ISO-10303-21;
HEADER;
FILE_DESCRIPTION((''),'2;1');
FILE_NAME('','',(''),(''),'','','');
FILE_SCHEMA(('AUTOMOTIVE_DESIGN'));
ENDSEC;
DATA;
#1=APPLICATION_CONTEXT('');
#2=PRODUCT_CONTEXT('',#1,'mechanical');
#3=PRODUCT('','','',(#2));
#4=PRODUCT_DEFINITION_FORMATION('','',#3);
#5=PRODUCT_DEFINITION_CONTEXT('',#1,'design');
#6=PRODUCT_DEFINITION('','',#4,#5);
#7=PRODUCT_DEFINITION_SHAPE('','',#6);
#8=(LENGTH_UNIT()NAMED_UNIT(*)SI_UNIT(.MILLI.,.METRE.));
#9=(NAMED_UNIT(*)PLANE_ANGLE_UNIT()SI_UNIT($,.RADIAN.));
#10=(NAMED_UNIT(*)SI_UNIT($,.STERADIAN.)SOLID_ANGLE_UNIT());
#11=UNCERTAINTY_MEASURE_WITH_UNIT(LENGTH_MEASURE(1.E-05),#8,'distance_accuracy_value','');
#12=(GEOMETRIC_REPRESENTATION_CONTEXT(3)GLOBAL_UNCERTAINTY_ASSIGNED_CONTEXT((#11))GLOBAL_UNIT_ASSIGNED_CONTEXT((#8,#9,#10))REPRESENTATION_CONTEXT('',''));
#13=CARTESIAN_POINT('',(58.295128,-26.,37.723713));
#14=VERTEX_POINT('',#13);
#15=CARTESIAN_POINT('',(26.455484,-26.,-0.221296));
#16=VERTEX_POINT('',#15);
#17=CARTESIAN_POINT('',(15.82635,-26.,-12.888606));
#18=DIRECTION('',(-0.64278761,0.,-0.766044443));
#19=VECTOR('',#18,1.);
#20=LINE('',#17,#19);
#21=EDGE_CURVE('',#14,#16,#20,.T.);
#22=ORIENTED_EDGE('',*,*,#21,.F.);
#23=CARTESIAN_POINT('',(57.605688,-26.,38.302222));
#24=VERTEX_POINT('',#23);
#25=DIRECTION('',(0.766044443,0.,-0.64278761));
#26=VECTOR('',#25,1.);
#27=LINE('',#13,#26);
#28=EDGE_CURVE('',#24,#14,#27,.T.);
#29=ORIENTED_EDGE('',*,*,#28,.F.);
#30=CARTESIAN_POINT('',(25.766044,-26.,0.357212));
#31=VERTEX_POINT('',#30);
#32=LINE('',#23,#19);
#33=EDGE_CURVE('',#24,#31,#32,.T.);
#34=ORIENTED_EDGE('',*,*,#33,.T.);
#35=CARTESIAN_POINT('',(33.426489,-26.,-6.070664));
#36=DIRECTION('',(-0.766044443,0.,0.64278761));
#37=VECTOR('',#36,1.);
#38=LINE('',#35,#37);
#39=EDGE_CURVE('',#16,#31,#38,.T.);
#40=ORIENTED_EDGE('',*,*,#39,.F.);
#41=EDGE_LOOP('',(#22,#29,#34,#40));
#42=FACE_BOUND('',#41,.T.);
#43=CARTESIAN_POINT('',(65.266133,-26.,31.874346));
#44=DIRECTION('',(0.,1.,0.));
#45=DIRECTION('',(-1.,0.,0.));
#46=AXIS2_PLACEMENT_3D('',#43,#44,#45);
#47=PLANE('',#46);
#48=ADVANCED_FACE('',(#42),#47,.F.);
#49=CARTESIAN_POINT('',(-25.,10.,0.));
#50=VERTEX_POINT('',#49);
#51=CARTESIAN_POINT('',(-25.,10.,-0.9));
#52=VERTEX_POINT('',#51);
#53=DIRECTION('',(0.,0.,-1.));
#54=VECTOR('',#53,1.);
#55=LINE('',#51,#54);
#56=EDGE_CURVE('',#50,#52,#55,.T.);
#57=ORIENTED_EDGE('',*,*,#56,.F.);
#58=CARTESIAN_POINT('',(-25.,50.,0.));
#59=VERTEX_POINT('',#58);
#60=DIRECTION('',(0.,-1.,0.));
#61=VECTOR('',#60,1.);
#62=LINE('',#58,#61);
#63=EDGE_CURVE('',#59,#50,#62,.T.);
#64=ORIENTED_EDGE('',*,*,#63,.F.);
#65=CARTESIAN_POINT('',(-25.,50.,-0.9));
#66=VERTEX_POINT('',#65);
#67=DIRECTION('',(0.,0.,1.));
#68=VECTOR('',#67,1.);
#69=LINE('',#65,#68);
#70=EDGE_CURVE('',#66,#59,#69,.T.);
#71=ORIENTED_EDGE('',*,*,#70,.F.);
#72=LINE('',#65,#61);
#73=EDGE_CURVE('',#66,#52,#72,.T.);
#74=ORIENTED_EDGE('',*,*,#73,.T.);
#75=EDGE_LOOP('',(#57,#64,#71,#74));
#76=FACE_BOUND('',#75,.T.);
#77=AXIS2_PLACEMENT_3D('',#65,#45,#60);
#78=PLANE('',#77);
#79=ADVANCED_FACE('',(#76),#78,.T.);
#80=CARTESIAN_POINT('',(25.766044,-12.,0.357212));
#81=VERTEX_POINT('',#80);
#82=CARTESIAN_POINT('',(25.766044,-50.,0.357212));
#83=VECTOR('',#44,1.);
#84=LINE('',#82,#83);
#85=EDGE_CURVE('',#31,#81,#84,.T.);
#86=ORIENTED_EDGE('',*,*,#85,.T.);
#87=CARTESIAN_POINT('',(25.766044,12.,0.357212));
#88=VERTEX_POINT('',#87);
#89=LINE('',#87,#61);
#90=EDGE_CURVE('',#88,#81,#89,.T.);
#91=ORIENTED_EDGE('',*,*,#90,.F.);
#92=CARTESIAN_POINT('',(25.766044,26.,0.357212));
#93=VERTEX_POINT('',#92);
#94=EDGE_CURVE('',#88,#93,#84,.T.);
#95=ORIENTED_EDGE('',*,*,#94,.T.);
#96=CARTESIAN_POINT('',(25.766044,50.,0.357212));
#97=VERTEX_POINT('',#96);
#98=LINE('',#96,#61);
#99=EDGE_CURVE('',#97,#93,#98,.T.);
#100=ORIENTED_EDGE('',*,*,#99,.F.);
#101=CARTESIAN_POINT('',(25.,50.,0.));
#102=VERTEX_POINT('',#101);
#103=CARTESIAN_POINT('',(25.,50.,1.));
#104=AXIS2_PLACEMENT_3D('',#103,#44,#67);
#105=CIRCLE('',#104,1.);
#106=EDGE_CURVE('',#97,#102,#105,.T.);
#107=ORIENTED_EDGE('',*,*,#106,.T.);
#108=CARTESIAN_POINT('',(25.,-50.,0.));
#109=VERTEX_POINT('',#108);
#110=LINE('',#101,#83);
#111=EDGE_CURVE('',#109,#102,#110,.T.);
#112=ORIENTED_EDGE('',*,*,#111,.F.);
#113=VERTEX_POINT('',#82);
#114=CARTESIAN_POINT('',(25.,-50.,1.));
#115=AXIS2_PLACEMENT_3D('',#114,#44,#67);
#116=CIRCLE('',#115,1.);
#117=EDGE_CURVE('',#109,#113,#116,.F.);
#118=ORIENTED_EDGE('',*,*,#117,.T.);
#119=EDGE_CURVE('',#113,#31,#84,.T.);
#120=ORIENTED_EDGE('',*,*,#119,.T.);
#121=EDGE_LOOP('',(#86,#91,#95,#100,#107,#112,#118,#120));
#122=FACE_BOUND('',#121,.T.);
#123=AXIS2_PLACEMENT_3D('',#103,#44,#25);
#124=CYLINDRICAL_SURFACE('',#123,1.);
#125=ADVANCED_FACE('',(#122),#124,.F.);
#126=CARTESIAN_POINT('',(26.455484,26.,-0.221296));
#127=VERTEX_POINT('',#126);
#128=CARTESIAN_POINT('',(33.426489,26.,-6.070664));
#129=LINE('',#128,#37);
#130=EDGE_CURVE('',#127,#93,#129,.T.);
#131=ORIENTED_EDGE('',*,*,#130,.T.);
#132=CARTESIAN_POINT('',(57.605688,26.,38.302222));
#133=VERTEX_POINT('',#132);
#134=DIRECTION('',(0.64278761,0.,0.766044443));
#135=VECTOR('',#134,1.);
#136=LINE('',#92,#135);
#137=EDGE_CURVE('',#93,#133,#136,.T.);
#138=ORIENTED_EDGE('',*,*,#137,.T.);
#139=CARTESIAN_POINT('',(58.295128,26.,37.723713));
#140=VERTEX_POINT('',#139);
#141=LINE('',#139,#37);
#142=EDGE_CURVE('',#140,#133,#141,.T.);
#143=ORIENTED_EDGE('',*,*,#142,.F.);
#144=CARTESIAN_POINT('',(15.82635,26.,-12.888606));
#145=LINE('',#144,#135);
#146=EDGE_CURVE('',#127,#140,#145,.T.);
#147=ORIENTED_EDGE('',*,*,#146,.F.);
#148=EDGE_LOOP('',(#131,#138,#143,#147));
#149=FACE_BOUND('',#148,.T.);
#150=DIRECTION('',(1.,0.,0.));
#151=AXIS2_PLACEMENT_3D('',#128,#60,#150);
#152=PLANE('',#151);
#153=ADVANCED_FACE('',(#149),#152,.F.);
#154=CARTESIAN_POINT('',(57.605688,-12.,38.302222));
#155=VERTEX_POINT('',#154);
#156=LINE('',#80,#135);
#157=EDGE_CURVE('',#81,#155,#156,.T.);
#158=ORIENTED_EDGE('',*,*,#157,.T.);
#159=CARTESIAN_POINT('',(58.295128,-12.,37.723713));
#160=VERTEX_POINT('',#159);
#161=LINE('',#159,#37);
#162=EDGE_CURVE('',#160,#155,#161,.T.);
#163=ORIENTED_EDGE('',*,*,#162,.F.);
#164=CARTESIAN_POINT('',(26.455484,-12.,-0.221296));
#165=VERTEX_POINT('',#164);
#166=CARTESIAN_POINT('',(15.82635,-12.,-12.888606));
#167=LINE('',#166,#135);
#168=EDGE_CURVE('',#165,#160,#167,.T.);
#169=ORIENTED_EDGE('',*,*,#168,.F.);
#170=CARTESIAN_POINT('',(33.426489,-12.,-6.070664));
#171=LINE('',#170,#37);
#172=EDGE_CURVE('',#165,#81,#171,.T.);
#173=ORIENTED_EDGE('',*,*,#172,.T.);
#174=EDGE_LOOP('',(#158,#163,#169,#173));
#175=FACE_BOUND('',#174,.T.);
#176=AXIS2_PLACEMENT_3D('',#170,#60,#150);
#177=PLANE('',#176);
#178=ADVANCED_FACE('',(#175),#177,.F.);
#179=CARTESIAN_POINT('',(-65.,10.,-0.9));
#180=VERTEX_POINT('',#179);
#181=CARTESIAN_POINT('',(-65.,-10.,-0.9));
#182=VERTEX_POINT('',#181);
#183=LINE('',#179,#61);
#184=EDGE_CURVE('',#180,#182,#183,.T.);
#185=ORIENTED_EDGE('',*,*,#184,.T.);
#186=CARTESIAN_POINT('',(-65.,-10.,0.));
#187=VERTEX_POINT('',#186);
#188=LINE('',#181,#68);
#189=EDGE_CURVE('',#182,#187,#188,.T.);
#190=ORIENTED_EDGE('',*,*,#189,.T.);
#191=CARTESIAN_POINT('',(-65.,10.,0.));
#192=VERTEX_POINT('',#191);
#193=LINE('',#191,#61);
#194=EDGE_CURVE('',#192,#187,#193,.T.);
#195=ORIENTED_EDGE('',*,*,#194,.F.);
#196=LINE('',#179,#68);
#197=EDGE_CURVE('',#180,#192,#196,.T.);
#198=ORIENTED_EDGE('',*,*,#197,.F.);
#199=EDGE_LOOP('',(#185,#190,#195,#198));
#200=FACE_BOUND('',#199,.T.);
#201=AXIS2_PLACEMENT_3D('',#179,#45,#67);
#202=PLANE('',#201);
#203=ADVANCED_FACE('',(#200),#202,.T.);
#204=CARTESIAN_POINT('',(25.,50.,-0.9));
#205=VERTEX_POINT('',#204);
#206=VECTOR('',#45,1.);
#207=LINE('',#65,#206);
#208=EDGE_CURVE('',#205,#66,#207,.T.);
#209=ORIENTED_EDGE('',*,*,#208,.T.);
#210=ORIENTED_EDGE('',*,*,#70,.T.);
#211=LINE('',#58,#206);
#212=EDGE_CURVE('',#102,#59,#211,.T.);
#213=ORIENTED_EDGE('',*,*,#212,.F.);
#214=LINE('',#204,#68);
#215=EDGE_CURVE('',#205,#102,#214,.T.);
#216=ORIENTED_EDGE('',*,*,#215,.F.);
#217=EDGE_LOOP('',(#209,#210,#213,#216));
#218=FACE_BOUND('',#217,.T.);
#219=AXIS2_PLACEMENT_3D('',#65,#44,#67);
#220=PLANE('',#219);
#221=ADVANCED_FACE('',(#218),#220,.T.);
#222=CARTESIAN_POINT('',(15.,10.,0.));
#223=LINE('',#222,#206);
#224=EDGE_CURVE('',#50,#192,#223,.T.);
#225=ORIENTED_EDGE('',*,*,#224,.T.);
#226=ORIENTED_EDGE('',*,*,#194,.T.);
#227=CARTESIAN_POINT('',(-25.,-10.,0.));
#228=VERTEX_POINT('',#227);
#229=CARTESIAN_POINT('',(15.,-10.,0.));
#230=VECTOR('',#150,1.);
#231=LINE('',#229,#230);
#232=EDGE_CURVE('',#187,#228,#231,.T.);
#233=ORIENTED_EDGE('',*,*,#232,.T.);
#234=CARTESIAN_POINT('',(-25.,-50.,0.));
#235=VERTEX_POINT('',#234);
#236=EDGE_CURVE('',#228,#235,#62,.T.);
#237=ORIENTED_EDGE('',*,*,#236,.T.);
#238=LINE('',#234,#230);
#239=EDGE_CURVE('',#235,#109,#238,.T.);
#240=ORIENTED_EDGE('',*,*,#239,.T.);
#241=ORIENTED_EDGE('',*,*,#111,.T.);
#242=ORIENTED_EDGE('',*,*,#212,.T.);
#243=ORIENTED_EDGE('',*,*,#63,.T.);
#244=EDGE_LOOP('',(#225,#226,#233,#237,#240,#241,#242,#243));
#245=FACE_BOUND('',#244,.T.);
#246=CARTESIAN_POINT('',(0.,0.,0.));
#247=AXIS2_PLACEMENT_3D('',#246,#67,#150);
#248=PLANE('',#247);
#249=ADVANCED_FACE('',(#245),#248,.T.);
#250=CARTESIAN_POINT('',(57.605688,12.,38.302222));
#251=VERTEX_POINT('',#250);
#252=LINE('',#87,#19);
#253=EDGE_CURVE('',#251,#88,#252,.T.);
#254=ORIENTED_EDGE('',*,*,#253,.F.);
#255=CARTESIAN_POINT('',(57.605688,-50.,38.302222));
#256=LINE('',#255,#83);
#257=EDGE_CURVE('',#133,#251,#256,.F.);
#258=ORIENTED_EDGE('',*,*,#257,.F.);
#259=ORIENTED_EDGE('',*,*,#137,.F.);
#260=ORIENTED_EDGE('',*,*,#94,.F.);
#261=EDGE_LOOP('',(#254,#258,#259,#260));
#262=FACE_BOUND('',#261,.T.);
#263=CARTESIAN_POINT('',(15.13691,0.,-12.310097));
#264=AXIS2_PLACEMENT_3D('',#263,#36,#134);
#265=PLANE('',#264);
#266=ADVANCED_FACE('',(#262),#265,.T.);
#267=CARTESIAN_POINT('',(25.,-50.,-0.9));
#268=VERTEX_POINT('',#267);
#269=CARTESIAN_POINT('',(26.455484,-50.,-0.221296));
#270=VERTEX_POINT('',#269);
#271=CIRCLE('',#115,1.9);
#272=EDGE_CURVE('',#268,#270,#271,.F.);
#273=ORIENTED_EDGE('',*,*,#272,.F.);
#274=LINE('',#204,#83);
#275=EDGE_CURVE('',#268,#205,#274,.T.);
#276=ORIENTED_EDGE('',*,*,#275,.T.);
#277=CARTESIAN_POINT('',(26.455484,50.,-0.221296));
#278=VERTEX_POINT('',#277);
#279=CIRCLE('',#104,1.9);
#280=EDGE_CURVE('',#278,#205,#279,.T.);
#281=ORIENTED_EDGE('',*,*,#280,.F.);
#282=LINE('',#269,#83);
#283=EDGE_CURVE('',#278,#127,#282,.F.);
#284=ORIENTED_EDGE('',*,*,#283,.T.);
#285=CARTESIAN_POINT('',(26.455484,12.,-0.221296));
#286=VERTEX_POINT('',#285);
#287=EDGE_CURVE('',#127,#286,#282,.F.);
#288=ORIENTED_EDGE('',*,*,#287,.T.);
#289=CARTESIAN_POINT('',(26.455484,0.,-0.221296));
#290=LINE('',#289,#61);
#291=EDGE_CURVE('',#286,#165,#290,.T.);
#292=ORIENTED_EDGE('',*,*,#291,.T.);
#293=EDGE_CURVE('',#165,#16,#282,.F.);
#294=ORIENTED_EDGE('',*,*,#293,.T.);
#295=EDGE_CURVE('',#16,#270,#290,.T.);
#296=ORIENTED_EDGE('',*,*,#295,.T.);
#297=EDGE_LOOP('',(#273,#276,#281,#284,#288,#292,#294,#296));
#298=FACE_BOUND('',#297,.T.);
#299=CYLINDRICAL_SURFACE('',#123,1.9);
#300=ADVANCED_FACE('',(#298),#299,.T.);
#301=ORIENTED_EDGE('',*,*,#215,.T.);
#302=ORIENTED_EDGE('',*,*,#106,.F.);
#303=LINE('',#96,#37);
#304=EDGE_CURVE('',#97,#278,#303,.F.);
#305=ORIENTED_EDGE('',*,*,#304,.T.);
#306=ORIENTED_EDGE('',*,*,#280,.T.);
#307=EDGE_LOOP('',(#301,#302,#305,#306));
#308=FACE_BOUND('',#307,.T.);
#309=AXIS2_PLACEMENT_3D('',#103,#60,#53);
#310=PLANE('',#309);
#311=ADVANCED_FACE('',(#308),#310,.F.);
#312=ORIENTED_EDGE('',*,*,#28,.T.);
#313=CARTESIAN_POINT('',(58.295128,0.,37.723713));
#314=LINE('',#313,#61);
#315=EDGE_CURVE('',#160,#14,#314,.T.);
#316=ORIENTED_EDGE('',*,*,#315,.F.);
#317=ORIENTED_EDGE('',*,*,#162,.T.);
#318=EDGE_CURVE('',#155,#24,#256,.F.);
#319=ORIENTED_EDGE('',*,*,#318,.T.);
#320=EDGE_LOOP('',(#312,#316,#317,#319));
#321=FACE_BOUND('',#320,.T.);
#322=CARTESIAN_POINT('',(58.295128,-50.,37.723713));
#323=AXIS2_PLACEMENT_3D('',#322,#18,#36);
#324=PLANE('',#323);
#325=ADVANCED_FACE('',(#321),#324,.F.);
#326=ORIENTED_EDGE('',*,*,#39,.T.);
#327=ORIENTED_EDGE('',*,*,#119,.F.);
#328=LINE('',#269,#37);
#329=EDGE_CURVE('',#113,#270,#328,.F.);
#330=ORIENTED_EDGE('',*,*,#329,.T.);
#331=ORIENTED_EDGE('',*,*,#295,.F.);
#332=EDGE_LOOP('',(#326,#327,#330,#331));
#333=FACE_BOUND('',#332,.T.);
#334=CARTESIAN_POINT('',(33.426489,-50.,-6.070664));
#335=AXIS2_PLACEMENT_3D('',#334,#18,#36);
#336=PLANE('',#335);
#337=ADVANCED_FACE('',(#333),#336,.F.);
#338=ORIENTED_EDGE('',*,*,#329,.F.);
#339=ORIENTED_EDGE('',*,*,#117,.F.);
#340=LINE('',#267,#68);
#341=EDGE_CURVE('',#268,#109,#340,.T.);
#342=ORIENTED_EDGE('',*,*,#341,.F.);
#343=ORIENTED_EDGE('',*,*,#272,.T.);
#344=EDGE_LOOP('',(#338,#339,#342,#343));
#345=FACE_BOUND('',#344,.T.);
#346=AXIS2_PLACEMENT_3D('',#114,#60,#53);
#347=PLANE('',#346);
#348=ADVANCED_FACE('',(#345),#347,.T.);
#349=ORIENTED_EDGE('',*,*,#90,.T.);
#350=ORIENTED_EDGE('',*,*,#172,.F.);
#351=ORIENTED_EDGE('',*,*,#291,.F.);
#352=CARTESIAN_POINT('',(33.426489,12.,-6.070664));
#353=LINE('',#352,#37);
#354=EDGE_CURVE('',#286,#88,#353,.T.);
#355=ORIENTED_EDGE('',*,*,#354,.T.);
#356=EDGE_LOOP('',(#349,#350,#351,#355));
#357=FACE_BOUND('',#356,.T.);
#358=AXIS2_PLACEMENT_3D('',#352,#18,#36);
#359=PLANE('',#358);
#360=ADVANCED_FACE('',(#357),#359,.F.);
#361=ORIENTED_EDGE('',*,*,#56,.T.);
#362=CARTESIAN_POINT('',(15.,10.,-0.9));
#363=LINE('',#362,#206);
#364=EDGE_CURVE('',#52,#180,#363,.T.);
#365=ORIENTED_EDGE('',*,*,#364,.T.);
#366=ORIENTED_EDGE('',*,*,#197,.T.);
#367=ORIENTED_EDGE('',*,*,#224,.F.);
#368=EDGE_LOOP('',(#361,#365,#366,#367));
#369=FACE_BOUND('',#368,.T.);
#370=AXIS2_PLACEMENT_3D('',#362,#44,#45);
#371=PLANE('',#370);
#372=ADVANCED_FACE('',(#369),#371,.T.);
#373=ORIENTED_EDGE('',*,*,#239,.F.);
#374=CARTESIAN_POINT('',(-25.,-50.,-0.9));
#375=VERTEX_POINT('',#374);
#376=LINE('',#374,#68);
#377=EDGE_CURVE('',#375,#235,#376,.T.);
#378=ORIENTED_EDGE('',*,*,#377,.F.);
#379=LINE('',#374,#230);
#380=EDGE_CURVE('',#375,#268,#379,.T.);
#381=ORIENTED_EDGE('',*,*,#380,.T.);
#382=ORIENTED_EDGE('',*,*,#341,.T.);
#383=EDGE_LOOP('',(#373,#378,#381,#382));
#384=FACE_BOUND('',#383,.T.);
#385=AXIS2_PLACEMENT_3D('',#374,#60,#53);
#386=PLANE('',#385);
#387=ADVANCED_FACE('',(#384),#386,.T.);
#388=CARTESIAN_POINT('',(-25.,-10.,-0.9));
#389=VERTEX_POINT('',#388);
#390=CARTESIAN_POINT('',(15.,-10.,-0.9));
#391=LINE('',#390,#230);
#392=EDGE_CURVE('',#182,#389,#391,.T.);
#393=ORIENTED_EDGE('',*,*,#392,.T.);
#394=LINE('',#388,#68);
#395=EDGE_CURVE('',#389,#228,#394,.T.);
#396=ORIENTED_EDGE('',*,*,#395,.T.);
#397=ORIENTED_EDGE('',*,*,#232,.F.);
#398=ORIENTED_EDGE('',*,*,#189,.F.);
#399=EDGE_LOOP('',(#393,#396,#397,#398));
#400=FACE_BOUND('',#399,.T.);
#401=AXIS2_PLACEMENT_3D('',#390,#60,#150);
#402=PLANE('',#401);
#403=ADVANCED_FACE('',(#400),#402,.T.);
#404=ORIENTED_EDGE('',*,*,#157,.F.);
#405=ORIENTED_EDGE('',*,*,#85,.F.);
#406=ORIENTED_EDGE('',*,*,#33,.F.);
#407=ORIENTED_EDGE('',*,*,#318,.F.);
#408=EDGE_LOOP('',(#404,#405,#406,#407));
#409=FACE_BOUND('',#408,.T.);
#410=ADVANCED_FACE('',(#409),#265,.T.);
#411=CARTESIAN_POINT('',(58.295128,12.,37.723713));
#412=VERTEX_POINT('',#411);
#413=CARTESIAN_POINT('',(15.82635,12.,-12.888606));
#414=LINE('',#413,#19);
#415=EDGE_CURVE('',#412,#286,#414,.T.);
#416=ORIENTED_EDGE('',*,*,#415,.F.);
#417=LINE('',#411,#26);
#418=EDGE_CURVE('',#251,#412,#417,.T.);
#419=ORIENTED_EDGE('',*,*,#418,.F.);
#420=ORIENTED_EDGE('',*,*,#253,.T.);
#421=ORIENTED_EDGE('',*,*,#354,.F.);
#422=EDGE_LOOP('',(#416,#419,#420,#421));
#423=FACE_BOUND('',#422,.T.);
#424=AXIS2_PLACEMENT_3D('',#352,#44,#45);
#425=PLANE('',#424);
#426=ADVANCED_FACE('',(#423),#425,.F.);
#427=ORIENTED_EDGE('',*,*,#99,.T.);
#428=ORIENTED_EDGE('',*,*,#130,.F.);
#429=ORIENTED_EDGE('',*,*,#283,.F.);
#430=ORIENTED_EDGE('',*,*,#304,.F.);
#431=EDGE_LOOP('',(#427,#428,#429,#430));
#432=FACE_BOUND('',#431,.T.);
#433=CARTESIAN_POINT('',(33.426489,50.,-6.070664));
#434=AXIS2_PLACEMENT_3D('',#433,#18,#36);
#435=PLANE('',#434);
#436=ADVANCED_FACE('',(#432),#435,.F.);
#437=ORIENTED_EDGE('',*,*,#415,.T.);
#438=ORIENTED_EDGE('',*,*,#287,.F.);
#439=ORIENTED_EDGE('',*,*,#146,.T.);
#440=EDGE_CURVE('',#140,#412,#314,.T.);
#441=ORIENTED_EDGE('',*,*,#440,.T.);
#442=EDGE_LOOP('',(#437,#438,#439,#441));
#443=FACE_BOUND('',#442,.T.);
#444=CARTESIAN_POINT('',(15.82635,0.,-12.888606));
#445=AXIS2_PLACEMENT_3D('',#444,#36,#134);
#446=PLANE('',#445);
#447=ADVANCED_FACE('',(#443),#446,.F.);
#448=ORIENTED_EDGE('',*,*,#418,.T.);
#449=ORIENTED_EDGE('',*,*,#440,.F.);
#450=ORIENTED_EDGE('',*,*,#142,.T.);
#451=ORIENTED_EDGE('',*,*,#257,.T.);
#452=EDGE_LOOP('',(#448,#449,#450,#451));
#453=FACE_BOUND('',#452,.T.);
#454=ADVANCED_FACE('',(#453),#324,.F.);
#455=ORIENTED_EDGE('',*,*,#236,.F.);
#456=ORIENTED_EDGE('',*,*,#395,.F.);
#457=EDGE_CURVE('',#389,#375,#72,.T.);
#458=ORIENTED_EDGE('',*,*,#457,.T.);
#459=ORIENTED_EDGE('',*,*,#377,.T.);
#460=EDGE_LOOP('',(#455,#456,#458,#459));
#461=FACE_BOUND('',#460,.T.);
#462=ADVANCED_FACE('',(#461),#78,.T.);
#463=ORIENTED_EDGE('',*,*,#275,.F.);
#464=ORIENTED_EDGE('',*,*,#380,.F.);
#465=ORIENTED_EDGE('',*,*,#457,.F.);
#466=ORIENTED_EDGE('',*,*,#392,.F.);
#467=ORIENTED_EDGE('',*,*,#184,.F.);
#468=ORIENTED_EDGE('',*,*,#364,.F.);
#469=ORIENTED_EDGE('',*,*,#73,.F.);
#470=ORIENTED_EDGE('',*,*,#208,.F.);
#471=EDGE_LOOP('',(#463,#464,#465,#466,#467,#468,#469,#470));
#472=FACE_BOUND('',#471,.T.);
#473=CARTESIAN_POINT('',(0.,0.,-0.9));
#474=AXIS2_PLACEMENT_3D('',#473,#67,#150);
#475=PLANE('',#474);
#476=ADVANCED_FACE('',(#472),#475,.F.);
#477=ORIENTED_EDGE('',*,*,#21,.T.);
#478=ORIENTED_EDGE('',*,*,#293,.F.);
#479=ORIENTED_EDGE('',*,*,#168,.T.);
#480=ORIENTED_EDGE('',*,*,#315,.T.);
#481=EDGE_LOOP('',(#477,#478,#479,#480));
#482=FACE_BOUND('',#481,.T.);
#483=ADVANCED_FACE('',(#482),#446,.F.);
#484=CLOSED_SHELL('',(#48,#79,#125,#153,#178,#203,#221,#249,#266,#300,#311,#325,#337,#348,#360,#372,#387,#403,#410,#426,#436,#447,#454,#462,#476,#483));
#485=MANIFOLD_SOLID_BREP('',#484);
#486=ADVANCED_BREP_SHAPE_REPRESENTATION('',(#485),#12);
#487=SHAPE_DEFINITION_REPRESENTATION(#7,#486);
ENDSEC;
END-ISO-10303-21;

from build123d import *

# Parameters (mm, degrees)
SKETCH2_W          = 50
SKETCH2_H          = 100
BASE_FLANGE1_DEPTH = 0.9
EDGE_FLANGE1_DEPTH = 100
SKETCH10_W         = 49.533692342
SKETCH10_H         = 24
CUT_EXTRUDE1_DEPTH = 10
SKETCH12_W         = 49.533692342
SKETCH12_H         = 24
CUT_EXTRUDE2_DEPTH = 10
SKETCH13_W         = 49.533692342
SKETCH13_H         = 24
CUT_EXTRUDE3_DEPTH = 10
SKETCH17_W         = 80
SKETCH17_H         = 20
TAB4_DEPTH         = 0.9


# Sheet-metal steps are written as plain solids
with BuildPart() as part:
    # Sketch2 → Base-Flange1 (new body)
    with BuildSketch(Plane.XY):
        Rectangle(SKETCH2_W, SKETCH2_H)
    extrude(amount=-BASE_FLANGE1_DEPTH)

    # Edge-Flange1 section (across the edge) → Edge-Flange1 (add)
    with BuildSketch(Plane(origin=(25.466307658, -50, 0), x_dir=(-0.7660444431189747, 0, 0.6427876096865435), z_dir=(0, 1, 0))):
        with BuildLine():
            Line((-0.9, 0.466307658), (-0.9, 50))
            Line((-0.9, 50), (0, 50))
            Line((0, 50), (0, 0.466307658))
            ThreePointArc((0, 0.466307658), (0.093692213, 0.043689396), (0.35721239, -0.299736785))
            Line((0.35721239, -0.299736785), (-0.221296458, -0.989176784))
            ThreePointArc((-0.221296458, -0.989176784), (-0.721984795, -0.336667039), (-0.9, 0.466307658))
        make_face()
    extrude(amount=EDGE_FLANGE1_DEPTH)

    # Sketch10 → Cut-Extrude1 (cut)
    with BuildSketch(Plane(origin=(14.944242787, 0, -12.539708611), x_dir=(0.6427876096865437, 0, 0.7660444431189746), z_dir=(-0.7660444431189746, 0, 0.6427876096865437))):
        with Locations((41.602580856, 38)):
            Rectangle(SKETCH10_W, SKETCH10_H)
    extrude(amount=-CUT_EXTRUDE1_DEPTH, mode=Mode.SUBTRACT)

    # Sketch12 → Cut-Extrude2 (cut)
    with BuildSketch(Plane(origin=(14.944242787, 0, -12.539708611), x_dir=(0.6427876096865437, 0, 0.7660444431189746), z_dir=(-0.7660444431189746, 0, 0.6427876096865437))):
        with Locations((41.602580856, 0)):
            Rectangle(SKETCH12_W, SKETCH12_H)
    extrude(amount=-CUT_EXTRUDE2_DEPTH, mode=Mode.SUBTRACT)

    # Sketch13 → Cut-Extrude3 (cut)
    with BuildSketch(Plane(origin=(14.944242787, 0, -12.539708611), x_dir=(0.6427876096865437, 0, 0.7660444431189746), z_dir=(-0.7660444431189746, 0, 0.6427876096865437))):
        with Locations((41.602580856, -38)):
            Rectangle(SKETCH13_W, SKETCH13_H)
    extrude(amount=-CUT_EXTRUDE3_DEPTH, mode=Mode.SUBTRACT)

    # Sketch17 → Tab4 (add)
    with BuildSketch(Plane.XY):
        with Locations((-25, 0)):
            Rectangle(SKETCH17_W, SKETCH17_H)
    extrude(amount=-TAB4_DEPTH)


solid = part.part
